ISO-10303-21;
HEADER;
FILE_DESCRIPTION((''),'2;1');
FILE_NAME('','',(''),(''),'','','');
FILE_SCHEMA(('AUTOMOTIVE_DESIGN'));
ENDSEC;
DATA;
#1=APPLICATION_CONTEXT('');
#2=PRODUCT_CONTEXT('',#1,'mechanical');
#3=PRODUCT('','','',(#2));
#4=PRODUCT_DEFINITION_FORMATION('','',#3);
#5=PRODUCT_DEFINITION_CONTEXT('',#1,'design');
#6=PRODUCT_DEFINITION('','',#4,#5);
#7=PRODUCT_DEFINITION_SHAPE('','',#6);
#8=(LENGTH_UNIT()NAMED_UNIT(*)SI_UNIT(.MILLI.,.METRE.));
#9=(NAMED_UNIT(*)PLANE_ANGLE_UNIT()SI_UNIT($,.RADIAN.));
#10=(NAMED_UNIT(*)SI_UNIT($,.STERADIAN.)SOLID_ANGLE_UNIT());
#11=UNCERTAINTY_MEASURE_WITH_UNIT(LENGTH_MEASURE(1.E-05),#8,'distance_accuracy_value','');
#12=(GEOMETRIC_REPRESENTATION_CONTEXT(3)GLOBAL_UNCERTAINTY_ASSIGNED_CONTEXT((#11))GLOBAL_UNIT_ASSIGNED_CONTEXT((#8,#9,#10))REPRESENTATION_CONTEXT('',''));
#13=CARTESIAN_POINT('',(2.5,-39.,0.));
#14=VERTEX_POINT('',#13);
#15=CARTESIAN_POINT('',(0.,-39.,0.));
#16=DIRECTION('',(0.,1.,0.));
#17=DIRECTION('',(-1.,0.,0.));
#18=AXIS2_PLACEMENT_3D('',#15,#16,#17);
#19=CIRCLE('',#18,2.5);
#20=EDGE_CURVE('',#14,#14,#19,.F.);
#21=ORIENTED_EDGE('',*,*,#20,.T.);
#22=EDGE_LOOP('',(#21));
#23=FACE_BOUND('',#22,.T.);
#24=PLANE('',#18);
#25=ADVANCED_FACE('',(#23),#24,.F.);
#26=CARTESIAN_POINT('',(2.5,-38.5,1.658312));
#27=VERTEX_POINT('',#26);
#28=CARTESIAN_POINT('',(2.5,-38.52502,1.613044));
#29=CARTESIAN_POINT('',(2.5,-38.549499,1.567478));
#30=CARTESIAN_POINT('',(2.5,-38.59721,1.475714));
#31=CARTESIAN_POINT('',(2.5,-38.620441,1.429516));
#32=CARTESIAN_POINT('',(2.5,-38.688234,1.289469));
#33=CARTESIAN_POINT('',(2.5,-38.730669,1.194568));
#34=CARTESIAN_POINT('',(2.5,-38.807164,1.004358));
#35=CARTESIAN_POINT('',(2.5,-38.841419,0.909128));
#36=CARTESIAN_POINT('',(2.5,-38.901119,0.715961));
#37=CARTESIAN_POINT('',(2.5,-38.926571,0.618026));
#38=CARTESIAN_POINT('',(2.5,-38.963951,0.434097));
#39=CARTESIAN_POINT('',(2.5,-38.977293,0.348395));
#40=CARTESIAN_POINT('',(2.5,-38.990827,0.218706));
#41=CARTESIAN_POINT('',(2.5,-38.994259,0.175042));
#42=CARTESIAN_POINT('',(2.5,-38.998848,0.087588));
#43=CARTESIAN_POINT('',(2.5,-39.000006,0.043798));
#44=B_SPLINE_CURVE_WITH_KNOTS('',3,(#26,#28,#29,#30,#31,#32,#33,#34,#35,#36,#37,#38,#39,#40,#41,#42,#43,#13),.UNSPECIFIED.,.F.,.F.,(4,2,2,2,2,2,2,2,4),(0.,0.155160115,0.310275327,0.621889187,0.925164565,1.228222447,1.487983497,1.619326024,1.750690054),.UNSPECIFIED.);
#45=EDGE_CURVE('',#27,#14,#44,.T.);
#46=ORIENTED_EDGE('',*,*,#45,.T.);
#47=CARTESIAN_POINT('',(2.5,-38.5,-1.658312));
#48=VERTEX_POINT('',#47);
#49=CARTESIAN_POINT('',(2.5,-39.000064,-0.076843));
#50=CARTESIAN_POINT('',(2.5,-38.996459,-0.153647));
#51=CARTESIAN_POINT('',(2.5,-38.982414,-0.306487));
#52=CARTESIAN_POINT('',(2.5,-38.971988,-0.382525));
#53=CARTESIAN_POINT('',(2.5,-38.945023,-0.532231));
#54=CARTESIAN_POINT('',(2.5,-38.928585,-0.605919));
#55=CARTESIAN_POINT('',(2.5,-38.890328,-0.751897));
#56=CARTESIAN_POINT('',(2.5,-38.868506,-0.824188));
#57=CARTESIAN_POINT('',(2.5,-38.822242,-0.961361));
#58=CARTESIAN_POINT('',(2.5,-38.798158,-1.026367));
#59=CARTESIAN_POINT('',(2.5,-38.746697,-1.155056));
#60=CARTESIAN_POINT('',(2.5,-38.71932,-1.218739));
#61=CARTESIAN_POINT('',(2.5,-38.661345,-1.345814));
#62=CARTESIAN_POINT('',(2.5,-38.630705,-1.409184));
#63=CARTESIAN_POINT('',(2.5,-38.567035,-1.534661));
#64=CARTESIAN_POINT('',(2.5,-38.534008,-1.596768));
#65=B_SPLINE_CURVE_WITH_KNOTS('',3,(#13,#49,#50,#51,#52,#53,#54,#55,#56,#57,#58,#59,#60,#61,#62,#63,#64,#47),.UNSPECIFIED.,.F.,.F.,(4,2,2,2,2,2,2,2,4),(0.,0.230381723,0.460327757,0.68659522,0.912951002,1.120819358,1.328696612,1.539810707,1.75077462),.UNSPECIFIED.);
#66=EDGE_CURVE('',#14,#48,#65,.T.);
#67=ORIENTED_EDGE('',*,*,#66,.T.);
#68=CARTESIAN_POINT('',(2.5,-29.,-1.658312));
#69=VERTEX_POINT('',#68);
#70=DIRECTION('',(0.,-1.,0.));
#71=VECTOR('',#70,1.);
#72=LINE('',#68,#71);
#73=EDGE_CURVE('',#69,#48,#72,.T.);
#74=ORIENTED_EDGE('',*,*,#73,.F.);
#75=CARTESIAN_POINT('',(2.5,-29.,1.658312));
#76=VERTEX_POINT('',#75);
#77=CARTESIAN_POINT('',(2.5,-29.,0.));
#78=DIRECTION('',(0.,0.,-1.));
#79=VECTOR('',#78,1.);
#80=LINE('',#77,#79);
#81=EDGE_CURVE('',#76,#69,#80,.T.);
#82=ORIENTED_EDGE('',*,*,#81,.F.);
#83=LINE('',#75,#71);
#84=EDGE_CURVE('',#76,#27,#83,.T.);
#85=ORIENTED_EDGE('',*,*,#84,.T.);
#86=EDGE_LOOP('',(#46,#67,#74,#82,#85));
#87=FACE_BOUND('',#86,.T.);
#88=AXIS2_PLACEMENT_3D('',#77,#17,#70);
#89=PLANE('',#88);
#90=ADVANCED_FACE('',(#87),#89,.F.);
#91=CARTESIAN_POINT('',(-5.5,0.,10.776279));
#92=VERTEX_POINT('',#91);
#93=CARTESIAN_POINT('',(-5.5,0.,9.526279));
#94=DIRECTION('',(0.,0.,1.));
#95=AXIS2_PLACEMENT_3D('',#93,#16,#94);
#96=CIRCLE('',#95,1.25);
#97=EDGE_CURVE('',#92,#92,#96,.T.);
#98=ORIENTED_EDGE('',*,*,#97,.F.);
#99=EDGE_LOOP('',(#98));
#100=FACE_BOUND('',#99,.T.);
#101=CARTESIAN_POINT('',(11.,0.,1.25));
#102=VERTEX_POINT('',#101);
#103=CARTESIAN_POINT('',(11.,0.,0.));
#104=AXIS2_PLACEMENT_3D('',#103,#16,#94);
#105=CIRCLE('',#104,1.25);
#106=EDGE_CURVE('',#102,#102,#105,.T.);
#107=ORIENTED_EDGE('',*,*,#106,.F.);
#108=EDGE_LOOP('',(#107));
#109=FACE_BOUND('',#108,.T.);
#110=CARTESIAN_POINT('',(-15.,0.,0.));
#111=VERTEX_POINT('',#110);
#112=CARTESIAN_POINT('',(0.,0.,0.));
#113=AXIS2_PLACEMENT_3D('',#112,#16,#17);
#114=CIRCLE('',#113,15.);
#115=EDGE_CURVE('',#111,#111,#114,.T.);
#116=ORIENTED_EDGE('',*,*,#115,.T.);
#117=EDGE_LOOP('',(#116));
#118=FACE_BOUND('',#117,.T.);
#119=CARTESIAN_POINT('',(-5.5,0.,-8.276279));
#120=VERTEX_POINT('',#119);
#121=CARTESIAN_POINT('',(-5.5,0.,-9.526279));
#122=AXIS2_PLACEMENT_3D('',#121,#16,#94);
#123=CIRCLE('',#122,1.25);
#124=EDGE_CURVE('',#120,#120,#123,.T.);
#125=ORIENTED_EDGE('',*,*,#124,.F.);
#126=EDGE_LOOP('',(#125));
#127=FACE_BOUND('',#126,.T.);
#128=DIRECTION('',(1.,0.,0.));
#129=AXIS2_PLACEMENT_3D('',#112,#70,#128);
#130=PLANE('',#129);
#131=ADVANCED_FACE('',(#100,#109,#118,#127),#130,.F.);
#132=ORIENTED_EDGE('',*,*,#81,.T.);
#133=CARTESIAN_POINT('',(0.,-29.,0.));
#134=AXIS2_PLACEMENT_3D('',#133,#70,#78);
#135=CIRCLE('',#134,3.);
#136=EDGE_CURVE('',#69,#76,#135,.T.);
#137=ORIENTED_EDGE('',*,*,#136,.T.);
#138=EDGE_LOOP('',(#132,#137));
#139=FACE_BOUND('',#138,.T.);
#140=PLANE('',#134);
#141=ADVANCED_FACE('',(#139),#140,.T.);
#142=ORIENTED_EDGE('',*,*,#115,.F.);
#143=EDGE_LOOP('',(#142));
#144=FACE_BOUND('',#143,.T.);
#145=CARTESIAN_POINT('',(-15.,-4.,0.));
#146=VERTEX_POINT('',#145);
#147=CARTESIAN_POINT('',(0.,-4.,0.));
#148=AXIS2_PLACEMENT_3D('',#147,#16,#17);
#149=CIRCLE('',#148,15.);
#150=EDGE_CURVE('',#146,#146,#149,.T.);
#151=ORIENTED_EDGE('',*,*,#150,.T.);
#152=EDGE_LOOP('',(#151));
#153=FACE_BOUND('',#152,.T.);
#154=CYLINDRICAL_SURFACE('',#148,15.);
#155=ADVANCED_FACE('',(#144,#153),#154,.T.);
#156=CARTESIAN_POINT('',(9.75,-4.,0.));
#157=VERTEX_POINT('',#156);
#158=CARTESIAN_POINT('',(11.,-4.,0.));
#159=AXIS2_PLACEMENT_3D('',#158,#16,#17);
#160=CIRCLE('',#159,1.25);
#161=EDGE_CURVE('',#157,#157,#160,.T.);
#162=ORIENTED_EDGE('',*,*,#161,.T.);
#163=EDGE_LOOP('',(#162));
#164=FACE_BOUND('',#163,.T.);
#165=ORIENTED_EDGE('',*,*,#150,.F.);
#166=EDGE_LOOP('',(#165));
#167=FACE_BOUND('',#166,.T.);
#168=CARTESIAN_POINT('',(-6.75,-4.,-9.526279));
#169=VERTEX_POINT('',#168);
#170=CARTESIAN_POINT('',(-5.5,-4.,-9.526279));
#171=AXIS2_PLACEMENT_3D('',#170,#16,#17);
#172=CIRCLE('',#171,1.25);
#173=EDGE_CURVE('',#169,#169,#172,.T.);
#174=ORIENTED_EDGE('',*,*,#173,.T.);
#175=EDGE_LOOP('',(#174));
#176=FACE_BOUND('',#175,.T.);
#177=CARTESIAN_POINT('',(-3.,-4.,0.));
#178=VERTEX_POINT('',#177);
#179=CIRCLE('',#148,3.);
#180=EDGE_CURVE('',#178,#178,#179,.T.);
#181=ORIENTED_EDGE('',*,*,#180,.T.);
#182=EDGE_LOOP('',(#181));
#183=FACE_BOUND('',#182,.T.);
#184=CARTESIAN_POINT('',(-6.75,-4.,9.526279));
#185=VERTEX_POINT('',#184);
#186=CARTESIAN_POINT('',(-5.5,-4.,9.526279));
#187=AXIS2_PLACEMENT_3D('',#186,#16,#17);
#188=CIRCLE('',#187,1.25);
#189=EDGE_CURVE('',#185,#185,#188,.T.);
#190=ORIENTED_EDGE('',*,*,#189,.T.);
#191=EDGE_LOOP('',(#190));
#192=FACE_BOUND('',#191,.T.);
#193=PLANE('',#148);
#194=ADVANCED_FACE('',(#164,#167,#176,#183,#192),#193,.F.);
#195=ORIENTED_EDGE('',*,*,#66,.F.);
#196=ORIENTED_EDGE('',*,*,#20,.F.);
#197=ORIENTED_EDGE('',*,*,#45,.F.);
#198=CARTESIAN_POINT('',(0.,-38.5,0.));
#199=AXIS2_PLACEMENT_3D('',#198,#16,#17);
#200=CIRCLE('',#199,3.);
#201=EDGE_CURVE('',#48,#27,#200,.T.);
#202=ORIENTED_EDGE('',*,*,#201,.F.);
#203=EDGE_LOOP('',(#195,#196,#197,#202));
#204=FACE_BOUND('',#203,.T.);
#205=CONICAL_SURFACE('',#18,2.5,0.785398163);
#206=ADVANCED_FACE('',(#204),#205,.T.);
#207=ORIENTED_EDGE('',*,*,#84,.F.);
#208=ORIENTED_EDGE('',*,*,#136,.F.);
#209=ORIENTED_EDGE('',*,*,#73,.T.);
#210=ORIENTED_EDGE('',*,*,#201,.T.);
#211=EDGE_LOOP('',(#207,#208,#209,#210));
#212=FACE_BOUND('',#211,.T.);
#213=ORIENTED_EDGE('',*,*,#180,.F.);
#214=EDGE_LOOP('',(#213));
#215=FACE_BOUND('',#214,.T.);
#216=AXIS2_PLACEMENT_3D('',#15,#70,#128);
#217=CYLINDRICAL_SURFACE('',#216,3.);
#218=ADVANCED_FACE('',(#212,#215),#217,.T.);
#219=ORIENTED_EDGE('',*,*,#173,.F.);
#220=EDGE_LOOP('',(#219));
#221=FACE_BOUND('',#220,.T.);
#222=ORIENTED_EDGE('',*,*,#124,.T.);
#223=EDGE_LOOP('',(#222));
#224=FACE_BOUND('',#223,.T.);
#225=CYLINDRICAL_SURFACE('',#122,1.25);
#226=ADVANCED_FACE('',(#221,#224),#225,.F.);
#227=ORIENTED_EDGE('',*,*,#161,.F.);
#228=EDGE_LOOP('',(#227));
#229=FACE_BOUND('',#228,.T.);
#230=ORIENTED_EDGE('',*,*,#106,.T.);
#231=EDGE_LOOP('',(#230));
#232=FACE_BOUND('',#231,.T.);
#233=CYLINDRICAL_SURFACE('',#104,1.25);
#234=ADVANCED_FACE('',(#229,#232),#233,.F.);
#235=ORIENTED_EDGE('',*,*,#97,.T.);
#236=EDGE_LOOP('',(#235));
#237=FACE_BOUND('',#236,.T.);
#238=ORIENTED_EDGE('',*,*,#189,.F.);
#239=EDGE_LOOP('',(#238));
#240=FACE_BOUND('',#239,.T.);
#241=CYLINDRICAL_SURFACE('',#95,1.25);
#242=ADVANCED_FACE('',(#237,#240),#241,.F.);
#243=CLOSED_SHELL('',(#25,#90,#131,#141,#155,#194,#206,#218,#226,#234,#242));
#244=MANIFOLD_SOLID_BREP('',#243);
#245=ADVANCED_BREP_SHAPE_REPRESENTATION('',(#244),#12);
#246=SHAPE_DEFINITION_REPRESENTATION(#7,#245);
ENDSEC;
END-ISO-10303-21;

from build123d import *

# Parameters (mm, degrees)
CROQUIS1_W                                 = 3
CROQUIS1_H                                 = 39
CORTAR_EXTRUIR1_DEPTH                      = 10
CROQUIS4_R                                 = 15
SALIENTE_EXTRUIR1_DEPTH                    = 4
PERFORADOR_PARA_ROSCAR_PARA_MACHO_DE_ROS_D = 2.5
CHAFL_N1_SIZE                              = 0.5


with BuildPart() as part:
    # Croquis1 → Revolución1 (revolve)
    with BuildSketch(Plane.XY):
        with Locations((1.5, -19.5)):
            Rectangle(CROQUIS1_W, CROQUIS1_H)
    revolve(axis=Axis((0, -39, 0), (0, 1, 0)))

    # Croquis2 → Cortar-Extruir1 (cut)
    with BuildSketch(Plane.XZ.offset(39)):
        with BuildLine():
            Line((2.5, 1.658312395), (2.5, -1.658312395))
            ThreePointArc((2.5, -1.658312395), (3, 0), (2.5, 1.658312395))
        make_face()
    extrude(amount=-CORTAR_EXTRUIR1_DEPTH, mode=Mode.SUBTRACT)

    # Croquis4 → Saliente-Extruir1 (add)
    with BuildSketch(Plane(origin=(0, 0, 0), x_dir=(1, 0, 0), z_dir=(0, 1, 0))):
        with Locations(Location((0, 0, 0), (0, 0, 180))):
            Circle(CROQUIS4_R)
    extrude(amount=-SALIENTE_EXTRUIR1_DEPTH)

    # Perforador para roscar para macho de roscar para M3x0.51 (through all)
    with Locations(Plane(origin=(0, 0, 0), x_dir=(1, 0, 0), z_dir=(0, 1, 0))):
        with Locations((11, 0), (-5.5, -9.526279442), (-5.5, 9.526279442)):
            Hole(PERFORADOR_PARA_ROSCAR_PARA_MACHO_DE_ROS_D / 2)

    # Chaflán1
    chafl_n1_edges = [part.edges().sort_by_distance(p)[0] for p in [
        (-3, -39, 0),
    ]]
    chamfer(chafl_n1_edges, length=CHAFL_N1_SIZE - 0.0001)  # a hair under: the kernel refuses the full size


solid = part.part
